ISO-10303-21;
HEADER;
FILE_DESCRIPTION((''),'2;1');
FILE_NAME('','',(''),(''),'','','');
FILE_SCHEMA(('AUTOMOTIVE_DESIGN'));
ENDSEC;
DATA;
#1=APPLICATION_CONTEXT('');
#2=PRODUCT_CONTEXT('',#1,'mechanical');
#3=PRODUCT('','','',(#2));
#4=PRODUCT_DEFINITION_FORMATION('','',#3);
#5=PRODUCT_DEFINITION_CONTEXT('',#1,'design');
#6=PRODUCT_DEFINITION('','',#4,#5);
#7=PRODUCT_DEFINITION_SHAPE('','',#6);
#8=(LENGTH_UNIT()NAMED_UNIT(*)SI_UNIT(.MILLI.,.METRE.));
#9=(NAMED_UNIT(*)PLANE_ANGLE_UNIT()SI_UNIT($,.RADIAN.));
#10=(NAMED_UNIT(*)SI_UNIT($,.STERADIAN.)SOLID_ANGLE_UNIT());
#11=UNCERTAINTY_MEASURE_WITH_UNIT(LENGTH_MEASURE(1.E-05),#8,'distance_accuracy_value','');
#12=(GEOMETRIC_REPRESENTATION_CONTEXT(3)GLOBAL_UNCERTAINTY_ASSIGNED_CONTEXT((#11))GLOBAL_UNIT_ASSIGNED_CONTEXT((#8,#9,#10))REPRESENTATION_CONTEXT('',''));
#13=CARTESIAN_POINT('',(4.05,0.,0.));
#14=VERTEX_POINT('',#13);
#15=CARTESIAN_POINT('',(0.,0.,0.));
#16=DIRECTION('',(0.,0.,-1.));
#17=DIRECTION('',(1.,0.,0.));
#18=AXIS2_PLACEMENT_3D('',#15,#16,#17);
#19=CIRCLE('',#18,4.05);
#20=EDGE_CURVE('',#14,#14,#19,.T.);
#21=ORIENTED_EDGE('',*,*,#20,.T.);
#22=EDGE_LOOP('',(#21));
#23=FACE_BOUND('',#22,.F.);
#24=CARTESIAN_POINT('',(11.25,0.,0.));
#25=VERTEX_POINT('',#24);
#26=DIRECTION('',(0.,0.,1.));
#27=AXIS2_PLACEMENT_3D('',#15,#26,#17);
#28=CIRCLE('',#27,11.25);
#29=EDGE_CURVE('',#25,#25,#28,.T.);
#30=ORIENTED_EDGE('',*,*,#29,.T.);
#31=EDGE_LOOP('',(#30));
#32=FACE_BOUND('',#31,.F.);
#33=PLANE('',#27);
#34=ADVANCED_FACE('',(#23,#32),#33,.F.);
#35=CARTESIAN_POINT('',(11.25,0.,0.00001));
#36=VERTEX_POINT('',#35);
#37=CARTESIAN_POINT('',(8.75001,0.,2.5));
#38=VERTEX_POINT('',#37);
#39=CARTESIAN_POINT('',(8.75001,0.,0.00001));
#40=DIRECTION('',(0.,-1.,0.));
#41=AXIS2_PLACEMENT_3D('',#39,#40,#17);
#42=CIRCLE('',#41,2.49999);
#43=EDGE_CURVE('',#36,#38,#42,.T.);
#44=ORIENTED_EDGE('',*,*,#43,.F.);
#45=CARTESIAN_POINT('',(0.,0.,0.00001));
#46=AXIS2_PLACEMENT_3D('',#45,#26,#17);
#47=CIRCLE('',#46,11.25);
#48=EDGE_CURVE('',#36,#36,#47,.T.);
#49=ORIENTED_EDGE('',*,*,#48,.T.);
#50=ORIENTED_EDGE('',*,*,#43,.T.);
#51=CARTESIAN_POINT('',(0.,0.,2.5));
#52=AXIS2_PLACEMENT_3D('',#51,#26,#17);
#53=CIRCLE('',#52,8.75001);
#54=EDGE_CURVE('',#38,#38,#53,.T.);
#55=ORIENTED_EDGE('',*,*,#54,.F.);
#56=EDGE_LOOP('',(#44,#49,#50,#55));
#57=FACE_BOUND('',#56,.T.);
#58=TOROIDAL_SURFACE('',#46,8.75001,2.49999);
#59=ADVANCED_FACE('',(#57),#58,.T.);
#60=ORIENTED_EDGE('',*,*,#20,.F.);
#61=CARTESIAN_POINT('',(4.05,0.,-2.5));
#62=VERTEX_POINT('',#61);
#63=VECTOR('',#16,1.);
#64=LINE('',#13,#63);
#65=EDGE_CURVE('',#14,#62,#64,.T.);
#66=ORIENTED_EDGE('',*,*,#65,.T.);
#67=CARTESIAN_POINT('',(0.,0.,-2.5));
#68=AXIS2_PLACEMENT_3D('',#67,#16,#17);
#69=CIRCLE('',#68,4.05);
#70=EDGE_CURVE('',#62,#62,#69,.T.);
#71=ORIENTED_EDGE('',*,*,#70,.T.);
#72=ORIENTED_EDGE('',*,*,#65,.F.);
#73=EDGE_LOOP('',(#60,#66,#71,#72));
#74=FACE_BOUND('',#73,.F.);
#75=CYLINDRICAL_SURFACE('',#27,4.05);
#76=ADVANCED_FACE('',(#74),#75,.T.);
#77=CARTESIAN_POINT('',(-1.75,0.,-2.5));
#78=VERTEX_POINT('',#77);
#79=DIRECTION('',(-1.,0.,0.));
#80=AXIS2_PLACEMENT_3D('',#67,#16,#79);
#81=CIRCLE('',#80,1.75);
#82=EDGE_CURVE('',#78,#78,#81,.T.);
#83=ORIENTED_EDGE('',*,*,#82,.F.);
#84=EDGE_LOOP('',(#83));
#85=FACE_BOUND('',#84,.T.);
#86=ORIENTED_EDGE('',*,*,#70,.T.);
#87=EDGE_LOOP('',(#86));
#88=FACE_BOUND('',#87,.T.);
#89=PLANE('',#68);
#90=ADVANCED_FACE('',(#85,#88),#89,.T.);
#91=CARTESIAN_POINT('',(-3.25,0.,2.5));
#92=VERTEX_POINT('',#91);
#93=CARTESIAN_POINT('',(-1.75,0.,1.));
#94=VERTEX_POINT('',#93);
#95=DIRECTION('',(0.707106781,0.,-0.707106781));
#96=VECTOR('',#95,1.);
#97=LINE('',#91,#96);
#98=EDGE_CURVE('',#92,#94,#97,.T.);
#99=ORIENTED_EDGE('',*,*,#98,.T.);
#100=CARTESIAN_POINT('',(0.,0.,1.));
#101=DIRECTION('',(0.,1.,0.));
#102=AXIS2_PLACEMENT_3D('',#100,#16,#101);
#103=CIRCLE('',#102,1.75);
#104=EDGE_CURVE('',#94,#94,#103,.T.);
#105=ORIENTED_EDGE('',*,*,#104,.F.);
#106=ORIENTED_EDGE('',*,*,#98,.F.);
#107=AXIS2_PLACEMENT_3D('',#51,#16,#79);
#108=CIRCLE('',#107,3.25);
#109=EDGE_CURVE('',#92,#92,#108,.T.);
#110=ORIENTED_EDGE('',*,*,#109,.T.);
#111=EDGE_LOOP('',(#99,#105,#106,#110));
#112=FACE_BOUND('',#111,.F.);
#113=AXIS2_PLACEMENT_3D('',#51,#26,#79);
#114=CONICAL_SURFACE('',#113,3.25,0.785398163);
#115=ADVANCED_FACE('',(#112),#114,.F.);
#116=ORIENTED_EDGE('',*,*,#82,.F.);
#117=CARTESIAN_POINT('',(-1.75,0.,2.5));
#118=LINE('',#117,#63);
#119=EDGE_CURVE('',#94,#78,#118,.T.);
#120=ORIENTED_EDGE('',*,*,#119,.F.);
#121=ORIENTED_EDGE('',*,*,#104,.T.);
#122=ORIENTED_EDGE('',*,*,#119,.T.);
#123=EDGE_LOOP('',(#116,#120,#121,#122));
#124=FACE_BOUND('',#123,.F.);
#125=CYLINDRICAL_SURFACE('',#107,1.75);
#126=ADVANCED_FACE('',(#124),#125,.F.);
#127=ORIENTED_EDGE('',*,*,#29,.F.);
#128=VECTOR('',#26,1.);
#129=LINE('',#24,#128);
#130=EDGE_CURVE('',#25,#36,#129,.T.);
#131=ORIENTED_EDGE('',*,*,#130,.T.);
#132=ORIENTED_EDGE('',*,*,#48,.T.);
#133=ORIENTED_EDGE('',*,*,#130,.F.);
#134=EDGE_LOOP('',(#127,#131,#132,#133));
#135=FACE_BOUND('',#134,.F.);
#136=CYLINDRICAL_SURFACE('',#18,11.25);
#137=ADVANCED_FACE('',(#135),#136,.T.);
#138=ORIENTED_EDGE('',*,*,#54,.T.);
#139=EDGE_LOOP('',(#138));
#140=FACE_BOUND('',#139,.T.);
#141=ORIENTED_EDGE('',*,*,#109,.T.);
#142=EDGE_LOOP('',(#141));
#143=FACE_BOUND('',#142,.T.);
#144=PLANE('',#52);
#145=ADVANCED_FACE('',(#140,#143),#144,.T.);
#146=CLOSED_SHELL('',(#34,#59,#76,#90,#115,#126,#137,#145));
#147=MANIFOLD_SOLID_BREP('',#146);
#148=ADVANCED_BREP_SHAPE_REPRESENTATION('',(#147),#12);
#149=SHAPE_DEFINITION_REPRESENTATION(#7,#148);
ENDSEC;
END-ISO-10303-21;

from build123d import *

# Parameters (mm, degrees)
F0_R           = 11.25
F1_DEPTH       = 2.5
F2_R           = 2.49999
F4_R           = 4.05
F5_DEPTH       = 2.5
F6_D           = 3.5
F6_DEPTH       = 7
F6_CSINK_D     = 6.5
F6_CSINK_ANGLE = 90
F6_TIP         = 1.0515060833


# Not quite as in the source:
# - a fillet or chamfer is up to 0.001 mm smaller than in the source, because OpenCascade refuses the exact size


with BuildPart() as f1:
    # F0 (on Top) → F1 (new body)
    with BuildSketch(Plane.XY):
        Circle(F0_R)
    extrude(amount=F1_DEPTH)

    # F2 (radius 2.5 in the source; OpenCascade refuses exactly that, so slightly less here)
    f2_edges = [f1.edges().sort_by_distance(p)[0] for p in [
        (-11.25, 0, 2.5),
    ]]
    fillet(f2_edges, radius=F2_R)

    # F4 (on face) → F5 (join)
    with BuildSketch(Plane(origin=(0, 0, 0), x_dir=(1, 0, 0), z_dir=(0, 0, -1))):
        Circle(F4_R)
    extrude(amount=F5_DEPTH)

    # F6
    with Locations(Plane.XY.offset(2.5)):
        with Locations((0, 0)):
            CounterSinkHole(F6_D / 2, F6_CSINK_D / 2, depth=F6_DEPTH, counter_sink_angle=F6_CSINK_ANGLE)
            with Locations((0, 0, -(F6_DEPTH + F6_TIP / 2))):  # 118° drill point
                Cone(0, F6_D / 2, F6_TIP, mode=Mode.SUBTRACT)


solid = f1.part
